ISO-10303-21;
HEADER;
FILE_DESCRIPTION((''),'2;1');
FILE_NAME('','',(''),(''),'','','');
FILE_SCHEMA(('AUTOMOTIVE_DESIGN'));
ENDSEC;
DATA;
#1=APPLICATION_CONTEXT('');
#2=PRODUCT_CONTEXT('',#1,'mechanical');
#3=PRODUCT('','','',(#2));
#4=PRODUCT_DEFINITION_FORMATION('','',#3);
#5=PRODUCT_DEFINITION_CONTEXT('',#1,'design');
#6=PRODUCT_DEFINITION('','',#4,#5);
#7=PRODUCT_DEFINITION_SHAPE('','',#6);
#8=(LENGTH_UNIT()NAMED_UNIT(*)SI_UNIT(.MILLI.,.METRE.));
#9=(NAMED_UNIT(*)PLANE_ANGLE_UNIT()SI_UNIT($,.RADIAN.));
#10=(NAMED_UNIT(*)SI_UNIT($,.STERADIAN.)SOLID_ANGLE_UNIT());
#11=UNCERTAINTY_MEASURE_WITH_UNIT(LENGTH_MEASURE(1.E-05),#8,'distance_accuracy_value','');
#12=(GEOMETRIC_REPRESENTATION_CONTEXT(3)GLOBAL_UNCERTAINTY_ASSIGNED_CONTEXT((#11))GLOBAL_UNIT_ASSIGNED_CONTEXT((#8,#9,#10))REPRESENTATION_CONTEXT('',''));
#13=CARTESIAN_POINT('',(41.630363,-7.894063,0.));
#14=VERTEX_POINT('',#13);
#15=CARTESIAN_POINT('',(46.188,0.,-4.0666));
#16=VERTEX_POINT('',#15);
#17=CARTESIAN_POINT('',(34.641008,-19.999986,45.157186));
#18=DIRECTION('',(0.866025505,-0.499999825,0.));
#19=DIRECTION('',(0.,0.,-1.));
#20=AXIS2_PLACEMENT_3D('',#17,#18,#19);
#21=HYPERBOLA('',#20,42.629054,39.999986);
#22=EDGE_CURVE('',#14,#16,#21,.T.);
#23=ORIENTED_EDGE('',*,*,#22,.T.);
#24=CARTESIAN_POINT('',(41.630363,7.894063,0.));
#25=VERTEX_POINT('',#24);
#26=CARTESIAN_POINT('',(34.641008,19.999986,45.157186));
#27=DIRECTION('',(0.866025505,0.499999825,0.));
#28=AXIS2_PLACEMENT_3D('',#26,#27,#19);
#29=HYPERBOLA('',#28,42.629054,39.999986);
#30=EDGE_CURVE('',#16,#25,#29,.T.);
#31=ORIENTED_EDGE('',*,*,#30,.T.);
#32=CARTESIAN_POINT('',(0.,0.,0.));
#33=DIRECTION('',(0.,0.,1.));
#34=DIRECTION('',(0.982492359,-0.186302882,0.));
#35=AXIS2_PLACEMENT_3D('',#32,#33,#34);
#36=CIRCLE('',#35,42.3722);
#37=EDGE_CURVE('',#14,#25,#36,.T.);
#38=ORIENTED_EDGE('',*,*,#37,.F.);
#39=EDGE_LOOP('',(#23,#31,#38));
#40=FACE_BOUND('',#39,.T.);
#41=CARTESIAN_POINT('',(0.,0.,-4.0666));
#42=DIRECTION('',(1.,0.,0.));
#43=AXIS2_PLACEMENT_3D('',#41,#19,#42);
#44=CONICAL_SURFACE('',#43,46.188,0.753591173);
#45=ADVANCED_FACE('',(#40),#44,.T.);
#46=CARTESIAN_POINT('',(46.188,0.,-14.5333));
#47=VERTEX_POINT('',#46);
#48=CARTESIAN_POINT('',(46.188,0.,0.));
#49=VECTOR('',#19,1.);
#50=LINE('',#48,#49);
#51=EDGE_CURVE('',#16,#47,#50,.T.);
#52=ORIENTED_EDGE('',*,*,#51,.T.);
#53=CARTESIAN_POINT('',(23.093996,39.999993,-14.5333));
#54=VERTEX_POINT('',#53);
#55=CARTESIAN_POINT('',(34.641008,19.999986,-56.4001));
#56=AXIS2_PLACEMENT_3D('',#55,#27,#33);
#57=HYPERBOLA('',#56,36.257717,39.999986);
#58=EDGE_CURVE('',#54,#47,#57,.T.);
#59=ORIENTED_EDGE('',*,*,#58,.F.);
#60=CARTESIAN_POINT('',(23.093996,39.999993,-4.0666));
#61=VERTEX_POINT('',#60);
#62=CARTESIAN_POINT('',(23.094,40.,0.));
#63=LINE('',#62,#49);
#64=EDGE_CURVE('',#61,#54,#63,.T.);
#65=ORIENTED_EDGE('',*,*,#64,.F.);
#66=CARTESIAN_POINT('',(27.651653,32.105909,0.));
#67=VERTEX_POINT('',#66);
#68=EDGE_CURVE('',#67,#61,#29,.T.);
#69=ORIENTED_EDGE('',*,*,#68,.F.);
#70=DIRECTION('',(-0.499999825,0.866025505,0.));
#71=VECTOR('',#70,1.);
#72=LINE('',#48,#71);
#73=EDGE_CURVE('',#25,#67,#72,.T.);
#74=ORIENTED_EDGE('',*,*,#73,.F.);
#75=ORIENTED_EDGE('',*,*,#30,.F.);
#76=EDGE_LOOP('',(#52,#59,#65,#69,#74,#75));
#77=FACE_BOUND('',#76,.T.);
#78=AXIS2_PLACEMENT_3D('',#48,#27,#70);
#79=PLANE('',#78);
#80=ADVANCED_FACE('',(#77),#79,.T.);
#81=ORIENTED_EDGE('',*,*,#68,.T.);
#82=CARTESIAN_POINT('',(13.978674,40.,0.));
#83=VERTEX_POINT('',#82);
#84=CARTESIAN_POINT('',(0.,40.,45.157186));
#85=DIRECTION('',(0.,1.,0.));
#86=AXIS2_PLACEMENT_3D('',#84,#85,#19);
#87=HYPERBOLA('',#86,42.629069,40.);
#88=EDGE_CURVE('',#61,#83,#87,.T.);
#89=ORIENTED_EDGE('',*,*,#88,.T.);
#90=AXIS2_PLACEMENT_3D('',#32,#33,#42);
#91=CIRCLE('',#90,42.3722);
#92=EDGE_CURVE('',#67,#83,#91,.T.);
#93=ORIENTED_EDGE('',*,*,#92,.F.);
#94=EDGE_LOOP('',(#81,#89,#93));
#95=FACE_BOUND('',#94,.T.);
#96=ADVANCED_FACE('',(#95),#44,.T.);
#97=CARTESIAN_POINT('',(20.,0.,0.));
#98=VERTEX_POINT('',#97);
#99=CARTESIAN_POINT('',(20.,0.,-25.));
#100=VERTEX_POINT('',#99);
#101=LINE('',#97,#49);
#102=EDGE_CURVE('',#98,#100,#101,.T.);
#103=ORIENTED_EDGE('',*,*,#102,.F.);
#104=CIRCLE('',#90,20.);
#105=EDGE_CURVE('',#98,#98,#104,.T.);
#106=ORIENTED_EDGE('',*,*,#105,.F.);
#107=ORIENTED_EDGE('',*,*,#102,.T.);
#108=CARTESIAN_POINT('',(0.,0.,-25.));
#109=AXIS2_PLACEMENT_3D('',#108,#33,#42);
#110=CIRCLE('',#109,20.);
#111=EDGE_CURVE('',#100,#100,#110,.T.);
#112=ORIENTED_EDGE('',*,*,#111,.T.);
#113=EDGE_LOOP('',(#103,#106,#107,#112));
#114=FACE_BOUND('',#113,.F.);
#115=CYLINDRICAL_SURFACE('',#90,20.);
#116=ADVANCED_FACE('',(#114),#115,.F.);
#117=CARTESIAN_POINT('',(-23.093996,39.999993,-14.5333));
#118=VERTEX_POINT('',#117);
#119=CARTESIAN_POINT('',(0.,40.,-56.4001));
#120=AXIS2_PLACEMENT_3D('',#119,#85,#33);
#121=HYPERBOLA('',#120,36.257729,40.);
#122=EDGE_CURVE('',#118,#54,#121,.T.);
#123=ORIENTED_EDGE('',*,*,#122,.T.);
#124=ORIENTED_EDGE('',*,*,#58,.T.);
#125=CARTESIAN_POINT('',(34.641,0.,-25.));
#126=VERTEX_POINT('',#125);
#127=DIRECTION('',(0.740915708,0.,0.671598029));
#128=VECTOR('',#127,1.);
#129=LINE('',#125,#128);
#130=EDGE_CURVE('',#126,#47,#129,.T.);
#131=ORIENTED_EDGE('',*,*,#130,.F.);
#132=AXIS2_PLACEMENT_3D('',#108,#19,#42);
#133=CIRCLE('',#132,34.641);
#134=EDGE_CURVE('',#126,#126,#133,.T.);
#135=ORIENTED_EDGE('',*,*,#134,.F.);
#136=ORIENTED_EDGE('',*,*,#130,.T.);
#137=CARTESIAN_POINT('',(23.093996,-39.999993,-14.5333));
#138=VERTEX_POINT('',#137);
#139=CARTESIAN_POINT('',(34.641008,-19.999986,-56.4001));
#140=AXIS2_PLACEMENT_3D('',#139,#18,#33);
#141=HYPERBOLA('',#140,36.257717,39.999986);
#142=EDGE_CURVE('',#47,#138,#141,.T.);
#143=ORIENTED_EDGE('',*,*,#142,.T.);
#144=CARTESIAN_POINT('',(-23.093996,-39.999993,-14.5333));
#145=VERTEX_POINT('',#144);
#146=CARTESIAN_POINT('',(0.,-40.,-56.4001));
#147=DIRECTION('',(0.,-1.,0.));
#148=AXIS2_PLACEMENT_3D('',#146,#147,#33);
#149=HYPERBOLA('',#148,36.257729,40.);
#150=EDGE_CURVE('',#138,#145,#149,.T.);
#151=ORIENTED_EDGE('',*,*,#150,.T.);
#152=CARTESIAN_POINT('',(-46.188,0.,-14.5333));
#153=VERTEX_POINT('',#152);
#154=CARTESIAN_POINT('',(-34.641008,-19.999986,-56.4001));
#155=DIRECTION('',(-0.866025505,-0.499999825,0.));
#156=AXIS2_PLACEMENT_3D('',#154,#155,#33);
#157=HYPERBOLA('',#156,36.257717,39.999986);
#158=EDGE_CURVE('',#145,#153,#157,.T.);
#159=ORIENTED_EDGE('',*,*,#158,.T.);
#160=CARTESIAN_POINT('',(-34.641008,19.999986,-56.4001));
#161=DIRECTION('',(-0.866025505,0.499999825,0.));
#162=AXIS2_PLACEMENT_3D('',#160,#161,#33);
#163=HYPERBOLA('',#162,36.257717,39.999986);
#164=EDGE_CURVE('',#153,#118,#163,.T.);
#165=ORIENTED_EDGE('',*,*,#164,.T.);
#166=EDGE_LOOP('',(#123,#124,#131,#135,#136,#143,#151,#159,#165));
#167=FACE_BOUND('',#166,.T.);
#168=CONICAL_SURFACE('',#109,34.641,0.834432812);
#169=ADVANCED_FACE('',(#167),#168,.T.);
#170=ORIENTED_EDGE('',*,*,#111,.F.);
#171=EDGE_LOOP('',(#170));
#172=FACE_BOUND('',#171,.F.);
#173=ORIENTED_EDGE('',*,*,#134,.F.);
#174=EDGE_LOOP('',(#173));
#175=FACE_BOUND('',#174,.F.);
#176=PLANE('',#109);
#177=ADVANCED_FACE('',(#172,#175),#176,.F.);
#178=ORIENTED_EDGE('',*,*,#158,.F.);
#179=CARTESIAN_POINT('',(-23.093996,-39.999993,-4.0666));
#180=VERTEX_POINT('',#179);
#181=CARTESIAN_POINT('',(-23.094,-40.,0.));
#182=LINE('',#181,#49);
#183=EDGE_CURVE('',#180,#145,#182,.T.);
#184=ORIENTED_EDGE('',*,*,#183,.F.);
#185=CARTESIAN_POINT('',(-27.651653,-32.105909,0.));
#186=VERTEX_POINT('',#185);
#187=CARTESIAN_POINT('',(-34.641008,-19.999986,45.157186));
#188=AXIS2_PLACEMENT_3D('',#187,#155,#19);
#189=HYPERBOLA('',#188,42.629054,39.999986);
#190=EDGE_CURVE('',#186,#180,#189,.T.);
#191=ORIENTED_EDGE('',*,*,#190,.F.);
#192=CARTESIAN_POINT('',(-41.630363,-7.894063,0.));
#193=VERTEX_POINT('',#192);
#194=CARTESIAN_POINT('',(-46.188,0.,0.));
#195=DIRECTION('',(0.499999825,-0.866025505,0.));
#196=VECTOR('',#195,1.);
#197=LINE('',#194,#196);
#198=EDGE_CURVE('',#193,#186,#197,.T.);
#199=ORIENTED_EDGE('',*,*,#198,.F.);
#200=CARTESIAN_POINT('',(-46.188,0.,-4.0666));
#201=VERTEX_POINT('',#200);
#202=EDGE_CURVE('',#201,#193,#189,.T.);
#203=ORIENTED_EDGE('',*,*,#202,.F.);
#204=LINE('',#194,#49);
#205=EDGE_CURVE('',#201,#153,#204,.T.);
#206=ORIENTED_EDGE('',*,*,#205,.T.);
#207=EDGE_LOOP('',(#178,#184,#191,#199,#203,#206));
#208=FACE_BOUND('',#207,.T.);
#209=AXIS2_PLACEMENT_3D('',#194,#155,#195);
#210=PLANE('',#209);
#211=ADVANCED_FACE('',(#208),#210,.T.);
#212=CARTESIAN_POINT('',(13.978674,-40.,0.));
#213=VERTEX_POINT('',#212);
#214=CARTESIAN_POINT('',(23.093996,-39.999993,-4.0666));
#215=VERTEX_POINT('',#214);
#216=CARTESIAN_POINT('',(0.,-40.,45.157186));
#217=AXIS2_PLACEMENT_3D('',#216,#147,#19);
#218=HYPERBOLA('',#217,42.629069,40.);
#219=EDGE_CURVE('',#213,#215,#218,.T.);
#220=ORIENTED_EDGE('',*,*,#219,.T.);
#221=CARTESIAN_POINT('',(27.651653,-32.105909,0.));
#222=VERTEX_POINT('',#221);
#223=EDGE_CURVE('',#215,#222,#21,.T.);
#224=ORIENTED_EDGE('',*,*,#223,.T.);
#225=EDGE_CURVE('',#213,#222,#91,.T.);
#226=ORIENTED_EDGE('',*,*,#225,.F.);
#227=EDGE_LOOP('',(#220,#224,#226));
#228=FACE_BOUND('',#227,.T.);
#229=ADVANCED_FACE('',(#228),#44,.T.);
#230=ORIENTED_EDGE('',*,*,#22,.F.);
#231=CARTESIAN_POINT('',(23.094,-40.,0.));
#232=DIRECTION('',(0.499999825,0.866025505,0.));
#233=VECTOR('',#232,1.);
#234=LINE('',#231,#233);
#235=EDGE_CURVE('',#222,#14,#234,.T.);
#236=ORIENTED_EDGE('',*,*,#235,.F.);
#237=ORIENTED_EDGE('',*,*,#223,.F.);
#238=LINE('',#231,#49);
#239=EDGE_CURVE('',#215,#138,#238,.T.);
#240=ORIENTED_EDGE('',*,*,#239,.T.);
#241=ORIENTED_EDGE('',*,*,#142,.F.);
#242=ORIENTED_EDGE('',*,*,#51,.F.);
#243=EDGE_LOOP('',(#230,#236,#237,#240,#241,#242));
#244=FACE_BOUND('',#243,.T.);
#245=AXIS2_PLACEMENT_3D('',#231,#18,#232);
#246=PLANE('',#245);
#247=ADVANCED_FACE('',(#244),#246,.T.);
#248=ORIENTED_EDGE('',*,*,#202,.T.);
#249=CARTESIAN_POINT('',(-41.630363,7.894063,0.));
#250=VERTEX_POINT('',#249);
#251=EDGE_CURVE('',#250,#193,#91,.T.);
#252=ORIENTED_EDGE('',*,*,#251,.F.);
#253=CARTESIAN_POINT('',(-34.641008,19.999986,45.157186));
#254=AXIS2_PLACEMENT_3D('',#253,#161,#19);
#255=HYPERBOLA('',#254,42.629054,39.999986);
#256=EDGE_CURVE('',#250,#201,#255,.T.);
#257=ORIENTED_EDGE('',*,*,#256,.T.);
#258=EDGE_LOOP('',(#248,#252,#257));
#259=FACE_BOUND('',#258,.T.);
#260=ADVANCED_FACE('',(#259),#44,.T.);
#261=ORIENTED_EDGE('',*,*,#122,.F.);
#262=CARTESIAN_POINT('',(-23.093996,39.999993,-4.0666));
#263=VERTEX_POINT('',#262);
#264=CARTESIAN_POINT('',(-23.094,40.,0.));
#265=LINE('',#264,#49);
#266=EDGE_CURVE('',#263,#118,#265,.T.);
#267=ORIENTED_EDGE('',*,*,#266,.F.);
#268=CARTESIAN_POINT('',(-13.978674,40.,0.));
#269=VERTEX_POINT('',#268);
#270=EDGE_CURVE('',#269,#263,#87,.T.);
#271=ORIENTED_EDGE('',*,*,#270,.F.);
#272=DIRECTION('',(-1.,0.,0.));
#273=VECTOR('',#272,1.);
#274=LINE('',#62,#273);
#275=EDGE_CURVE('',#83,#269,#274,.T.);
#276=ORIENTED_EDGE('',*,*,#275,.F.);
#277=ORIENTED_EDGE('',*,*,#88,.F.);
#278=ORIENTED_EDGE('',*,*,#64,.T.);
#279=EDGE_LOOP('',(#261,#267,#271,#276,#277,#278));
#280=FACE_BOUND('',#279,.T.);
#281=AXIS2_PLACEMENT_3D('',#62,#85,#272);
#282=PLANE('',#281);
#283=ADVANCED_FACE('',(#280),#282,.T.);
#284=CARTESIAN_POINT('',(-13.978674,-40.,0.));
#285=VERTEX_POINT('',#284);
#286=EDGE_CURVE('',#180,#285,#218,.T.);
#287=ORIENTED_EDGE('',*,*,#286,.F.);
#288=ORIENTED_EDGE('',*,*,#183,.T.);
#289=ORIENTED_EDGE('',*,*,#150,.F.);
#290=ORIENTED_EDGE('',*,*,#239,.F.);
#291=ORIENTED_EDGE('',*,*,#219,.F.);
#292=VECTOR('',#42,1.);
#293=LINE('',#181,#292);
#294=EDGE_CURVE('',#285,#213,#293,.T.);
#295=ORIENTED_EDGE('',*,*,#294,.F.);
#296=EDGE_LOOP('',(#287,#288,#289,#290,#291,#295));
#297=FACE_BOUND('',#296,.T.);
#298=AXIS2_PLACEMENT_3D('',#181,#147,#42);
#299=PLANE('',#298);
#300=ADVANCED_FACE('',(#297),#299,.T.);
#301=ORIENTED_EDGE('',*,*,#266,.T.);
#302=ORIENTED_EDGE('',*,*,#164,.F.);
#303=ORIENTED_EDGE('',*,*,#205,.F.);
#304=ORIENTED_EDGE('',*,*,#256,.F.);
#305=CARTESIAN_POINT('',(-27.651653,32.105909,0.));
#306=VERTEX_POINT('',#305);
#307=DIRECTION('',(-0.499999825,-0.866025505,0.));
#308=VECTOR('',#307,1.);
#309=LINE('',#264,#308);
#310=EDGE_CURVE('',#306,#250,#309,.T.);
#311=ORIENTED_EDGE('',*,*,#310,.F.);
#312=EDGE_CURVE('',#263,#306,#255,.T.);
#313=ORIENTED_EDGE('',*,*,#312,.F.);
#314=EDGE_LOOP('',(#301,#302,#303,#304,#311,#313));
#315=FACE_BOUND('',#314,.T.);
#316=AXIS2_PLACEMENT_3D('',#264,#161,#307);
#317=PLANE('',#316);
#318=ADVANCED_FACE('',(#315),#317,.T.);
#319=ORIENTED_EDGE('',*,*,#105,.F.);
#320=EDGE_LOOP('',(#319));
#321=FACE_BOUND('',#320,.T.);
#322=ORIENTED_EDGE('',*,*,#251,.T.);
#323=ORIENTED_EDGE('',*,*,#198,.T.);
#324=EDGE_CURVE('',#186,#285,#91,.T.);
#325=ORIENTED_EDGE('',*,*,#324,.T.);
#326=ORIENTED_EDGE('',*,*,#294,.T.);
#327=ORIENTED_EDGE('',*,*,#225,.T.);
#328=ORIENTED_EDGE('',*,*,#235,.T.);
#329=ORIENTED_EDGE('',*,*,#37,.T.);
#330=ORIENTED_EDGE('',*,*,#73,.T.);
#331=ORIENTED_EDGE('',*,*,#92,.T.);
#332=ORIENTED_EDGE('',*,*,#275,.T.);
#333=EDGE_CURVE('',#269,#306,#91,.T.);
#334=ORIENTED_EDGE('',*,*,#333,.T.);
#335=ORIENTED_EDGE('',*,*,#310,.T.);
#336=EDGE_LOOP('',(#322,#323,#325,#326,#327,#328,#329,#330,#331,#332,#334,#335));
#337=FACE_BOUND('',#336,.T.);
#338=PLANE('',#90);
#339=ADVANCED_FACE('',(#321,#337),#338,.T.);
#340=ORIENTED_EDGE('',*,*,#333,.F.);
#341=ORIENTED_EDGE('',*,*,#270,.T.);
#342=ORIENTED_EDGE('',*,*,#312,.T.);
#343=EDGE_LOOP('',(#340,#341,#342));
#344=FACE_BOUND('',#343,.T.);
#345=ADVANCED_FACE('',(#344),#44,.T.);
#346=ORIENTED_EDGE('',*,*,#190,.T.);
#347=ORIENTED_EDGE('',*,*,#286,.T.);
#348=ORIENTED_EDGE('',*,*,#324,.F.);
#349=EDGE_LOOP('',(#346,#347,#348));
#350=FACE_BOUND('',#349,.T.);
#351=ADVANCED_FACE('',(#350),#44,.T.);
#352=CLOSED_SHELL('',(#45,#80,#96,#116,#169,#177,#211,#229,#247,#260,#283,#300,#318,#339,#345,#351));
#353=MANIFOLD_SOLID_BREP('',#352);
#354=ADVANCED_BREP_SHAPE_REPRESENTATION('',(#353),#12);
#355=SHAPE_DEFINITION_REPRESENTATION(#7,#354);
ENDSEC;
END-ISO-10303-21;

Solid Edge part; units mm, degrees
sketch "Sketch1" plane through (0, 0, 0) normal (0, 0, 1) x (1, 0, 0)
  line L0 (-23.094, -40) -> (23.094, -40)
  line L1 (23.094, -40) -> (46.188, 0)
  line L2 (46.188, 0) -> (23.094, 40)
  line L3 (23.094, 40) -> (-23.094, 40)
  line L4 (-23.094, 40) -> (-46.188, 0)
  line L5 (-46.188, 0) -> (-23.094, -40)
extrude "Protrusion1" add sketch "Sketch1" against normal blind 25
sketch "Sketch2" plane through (0, 0, 0) normal (0, 0, 1) x (1, 0, 0)
  circle A0 centre (0, 0) radius 20
extrude "ExtrudedCutout_1" cut sketch "Sketch2" against normal blind 25
sketch "Sketch3" plane through (0, 0, 0) normal (0, -1, 0) x (1, 0, 0)
  line L0 (46.188, -4.0666) -> (42.3722, 0)
  line L1 (42.3722, 0) -> (46.188, 0)
  line L2 (46.188, 0) -> (46.188, -4.0666)
revolve "RevolvedCutout1" cut sketch "Sketch3" angle 360 about axis through (0, 0, 0) along (0, 0, 1)
sketch "Sketch4" plane through (0, 0, 0) normal (0, -1, 0) x (1, 0, 0)
  line L0 (34.641, -25) -> (46.188, -14.5333)
  line L1 (46.188, -25) -> (46.188, -14.5333)
  line L2 (46.188, -25) -> (34.641, -25)
revolve "RevolvedCutout2" cut sketch "Sketch4" angle 360 about axis through (0, 0, 0) along (0, 0, -1)
